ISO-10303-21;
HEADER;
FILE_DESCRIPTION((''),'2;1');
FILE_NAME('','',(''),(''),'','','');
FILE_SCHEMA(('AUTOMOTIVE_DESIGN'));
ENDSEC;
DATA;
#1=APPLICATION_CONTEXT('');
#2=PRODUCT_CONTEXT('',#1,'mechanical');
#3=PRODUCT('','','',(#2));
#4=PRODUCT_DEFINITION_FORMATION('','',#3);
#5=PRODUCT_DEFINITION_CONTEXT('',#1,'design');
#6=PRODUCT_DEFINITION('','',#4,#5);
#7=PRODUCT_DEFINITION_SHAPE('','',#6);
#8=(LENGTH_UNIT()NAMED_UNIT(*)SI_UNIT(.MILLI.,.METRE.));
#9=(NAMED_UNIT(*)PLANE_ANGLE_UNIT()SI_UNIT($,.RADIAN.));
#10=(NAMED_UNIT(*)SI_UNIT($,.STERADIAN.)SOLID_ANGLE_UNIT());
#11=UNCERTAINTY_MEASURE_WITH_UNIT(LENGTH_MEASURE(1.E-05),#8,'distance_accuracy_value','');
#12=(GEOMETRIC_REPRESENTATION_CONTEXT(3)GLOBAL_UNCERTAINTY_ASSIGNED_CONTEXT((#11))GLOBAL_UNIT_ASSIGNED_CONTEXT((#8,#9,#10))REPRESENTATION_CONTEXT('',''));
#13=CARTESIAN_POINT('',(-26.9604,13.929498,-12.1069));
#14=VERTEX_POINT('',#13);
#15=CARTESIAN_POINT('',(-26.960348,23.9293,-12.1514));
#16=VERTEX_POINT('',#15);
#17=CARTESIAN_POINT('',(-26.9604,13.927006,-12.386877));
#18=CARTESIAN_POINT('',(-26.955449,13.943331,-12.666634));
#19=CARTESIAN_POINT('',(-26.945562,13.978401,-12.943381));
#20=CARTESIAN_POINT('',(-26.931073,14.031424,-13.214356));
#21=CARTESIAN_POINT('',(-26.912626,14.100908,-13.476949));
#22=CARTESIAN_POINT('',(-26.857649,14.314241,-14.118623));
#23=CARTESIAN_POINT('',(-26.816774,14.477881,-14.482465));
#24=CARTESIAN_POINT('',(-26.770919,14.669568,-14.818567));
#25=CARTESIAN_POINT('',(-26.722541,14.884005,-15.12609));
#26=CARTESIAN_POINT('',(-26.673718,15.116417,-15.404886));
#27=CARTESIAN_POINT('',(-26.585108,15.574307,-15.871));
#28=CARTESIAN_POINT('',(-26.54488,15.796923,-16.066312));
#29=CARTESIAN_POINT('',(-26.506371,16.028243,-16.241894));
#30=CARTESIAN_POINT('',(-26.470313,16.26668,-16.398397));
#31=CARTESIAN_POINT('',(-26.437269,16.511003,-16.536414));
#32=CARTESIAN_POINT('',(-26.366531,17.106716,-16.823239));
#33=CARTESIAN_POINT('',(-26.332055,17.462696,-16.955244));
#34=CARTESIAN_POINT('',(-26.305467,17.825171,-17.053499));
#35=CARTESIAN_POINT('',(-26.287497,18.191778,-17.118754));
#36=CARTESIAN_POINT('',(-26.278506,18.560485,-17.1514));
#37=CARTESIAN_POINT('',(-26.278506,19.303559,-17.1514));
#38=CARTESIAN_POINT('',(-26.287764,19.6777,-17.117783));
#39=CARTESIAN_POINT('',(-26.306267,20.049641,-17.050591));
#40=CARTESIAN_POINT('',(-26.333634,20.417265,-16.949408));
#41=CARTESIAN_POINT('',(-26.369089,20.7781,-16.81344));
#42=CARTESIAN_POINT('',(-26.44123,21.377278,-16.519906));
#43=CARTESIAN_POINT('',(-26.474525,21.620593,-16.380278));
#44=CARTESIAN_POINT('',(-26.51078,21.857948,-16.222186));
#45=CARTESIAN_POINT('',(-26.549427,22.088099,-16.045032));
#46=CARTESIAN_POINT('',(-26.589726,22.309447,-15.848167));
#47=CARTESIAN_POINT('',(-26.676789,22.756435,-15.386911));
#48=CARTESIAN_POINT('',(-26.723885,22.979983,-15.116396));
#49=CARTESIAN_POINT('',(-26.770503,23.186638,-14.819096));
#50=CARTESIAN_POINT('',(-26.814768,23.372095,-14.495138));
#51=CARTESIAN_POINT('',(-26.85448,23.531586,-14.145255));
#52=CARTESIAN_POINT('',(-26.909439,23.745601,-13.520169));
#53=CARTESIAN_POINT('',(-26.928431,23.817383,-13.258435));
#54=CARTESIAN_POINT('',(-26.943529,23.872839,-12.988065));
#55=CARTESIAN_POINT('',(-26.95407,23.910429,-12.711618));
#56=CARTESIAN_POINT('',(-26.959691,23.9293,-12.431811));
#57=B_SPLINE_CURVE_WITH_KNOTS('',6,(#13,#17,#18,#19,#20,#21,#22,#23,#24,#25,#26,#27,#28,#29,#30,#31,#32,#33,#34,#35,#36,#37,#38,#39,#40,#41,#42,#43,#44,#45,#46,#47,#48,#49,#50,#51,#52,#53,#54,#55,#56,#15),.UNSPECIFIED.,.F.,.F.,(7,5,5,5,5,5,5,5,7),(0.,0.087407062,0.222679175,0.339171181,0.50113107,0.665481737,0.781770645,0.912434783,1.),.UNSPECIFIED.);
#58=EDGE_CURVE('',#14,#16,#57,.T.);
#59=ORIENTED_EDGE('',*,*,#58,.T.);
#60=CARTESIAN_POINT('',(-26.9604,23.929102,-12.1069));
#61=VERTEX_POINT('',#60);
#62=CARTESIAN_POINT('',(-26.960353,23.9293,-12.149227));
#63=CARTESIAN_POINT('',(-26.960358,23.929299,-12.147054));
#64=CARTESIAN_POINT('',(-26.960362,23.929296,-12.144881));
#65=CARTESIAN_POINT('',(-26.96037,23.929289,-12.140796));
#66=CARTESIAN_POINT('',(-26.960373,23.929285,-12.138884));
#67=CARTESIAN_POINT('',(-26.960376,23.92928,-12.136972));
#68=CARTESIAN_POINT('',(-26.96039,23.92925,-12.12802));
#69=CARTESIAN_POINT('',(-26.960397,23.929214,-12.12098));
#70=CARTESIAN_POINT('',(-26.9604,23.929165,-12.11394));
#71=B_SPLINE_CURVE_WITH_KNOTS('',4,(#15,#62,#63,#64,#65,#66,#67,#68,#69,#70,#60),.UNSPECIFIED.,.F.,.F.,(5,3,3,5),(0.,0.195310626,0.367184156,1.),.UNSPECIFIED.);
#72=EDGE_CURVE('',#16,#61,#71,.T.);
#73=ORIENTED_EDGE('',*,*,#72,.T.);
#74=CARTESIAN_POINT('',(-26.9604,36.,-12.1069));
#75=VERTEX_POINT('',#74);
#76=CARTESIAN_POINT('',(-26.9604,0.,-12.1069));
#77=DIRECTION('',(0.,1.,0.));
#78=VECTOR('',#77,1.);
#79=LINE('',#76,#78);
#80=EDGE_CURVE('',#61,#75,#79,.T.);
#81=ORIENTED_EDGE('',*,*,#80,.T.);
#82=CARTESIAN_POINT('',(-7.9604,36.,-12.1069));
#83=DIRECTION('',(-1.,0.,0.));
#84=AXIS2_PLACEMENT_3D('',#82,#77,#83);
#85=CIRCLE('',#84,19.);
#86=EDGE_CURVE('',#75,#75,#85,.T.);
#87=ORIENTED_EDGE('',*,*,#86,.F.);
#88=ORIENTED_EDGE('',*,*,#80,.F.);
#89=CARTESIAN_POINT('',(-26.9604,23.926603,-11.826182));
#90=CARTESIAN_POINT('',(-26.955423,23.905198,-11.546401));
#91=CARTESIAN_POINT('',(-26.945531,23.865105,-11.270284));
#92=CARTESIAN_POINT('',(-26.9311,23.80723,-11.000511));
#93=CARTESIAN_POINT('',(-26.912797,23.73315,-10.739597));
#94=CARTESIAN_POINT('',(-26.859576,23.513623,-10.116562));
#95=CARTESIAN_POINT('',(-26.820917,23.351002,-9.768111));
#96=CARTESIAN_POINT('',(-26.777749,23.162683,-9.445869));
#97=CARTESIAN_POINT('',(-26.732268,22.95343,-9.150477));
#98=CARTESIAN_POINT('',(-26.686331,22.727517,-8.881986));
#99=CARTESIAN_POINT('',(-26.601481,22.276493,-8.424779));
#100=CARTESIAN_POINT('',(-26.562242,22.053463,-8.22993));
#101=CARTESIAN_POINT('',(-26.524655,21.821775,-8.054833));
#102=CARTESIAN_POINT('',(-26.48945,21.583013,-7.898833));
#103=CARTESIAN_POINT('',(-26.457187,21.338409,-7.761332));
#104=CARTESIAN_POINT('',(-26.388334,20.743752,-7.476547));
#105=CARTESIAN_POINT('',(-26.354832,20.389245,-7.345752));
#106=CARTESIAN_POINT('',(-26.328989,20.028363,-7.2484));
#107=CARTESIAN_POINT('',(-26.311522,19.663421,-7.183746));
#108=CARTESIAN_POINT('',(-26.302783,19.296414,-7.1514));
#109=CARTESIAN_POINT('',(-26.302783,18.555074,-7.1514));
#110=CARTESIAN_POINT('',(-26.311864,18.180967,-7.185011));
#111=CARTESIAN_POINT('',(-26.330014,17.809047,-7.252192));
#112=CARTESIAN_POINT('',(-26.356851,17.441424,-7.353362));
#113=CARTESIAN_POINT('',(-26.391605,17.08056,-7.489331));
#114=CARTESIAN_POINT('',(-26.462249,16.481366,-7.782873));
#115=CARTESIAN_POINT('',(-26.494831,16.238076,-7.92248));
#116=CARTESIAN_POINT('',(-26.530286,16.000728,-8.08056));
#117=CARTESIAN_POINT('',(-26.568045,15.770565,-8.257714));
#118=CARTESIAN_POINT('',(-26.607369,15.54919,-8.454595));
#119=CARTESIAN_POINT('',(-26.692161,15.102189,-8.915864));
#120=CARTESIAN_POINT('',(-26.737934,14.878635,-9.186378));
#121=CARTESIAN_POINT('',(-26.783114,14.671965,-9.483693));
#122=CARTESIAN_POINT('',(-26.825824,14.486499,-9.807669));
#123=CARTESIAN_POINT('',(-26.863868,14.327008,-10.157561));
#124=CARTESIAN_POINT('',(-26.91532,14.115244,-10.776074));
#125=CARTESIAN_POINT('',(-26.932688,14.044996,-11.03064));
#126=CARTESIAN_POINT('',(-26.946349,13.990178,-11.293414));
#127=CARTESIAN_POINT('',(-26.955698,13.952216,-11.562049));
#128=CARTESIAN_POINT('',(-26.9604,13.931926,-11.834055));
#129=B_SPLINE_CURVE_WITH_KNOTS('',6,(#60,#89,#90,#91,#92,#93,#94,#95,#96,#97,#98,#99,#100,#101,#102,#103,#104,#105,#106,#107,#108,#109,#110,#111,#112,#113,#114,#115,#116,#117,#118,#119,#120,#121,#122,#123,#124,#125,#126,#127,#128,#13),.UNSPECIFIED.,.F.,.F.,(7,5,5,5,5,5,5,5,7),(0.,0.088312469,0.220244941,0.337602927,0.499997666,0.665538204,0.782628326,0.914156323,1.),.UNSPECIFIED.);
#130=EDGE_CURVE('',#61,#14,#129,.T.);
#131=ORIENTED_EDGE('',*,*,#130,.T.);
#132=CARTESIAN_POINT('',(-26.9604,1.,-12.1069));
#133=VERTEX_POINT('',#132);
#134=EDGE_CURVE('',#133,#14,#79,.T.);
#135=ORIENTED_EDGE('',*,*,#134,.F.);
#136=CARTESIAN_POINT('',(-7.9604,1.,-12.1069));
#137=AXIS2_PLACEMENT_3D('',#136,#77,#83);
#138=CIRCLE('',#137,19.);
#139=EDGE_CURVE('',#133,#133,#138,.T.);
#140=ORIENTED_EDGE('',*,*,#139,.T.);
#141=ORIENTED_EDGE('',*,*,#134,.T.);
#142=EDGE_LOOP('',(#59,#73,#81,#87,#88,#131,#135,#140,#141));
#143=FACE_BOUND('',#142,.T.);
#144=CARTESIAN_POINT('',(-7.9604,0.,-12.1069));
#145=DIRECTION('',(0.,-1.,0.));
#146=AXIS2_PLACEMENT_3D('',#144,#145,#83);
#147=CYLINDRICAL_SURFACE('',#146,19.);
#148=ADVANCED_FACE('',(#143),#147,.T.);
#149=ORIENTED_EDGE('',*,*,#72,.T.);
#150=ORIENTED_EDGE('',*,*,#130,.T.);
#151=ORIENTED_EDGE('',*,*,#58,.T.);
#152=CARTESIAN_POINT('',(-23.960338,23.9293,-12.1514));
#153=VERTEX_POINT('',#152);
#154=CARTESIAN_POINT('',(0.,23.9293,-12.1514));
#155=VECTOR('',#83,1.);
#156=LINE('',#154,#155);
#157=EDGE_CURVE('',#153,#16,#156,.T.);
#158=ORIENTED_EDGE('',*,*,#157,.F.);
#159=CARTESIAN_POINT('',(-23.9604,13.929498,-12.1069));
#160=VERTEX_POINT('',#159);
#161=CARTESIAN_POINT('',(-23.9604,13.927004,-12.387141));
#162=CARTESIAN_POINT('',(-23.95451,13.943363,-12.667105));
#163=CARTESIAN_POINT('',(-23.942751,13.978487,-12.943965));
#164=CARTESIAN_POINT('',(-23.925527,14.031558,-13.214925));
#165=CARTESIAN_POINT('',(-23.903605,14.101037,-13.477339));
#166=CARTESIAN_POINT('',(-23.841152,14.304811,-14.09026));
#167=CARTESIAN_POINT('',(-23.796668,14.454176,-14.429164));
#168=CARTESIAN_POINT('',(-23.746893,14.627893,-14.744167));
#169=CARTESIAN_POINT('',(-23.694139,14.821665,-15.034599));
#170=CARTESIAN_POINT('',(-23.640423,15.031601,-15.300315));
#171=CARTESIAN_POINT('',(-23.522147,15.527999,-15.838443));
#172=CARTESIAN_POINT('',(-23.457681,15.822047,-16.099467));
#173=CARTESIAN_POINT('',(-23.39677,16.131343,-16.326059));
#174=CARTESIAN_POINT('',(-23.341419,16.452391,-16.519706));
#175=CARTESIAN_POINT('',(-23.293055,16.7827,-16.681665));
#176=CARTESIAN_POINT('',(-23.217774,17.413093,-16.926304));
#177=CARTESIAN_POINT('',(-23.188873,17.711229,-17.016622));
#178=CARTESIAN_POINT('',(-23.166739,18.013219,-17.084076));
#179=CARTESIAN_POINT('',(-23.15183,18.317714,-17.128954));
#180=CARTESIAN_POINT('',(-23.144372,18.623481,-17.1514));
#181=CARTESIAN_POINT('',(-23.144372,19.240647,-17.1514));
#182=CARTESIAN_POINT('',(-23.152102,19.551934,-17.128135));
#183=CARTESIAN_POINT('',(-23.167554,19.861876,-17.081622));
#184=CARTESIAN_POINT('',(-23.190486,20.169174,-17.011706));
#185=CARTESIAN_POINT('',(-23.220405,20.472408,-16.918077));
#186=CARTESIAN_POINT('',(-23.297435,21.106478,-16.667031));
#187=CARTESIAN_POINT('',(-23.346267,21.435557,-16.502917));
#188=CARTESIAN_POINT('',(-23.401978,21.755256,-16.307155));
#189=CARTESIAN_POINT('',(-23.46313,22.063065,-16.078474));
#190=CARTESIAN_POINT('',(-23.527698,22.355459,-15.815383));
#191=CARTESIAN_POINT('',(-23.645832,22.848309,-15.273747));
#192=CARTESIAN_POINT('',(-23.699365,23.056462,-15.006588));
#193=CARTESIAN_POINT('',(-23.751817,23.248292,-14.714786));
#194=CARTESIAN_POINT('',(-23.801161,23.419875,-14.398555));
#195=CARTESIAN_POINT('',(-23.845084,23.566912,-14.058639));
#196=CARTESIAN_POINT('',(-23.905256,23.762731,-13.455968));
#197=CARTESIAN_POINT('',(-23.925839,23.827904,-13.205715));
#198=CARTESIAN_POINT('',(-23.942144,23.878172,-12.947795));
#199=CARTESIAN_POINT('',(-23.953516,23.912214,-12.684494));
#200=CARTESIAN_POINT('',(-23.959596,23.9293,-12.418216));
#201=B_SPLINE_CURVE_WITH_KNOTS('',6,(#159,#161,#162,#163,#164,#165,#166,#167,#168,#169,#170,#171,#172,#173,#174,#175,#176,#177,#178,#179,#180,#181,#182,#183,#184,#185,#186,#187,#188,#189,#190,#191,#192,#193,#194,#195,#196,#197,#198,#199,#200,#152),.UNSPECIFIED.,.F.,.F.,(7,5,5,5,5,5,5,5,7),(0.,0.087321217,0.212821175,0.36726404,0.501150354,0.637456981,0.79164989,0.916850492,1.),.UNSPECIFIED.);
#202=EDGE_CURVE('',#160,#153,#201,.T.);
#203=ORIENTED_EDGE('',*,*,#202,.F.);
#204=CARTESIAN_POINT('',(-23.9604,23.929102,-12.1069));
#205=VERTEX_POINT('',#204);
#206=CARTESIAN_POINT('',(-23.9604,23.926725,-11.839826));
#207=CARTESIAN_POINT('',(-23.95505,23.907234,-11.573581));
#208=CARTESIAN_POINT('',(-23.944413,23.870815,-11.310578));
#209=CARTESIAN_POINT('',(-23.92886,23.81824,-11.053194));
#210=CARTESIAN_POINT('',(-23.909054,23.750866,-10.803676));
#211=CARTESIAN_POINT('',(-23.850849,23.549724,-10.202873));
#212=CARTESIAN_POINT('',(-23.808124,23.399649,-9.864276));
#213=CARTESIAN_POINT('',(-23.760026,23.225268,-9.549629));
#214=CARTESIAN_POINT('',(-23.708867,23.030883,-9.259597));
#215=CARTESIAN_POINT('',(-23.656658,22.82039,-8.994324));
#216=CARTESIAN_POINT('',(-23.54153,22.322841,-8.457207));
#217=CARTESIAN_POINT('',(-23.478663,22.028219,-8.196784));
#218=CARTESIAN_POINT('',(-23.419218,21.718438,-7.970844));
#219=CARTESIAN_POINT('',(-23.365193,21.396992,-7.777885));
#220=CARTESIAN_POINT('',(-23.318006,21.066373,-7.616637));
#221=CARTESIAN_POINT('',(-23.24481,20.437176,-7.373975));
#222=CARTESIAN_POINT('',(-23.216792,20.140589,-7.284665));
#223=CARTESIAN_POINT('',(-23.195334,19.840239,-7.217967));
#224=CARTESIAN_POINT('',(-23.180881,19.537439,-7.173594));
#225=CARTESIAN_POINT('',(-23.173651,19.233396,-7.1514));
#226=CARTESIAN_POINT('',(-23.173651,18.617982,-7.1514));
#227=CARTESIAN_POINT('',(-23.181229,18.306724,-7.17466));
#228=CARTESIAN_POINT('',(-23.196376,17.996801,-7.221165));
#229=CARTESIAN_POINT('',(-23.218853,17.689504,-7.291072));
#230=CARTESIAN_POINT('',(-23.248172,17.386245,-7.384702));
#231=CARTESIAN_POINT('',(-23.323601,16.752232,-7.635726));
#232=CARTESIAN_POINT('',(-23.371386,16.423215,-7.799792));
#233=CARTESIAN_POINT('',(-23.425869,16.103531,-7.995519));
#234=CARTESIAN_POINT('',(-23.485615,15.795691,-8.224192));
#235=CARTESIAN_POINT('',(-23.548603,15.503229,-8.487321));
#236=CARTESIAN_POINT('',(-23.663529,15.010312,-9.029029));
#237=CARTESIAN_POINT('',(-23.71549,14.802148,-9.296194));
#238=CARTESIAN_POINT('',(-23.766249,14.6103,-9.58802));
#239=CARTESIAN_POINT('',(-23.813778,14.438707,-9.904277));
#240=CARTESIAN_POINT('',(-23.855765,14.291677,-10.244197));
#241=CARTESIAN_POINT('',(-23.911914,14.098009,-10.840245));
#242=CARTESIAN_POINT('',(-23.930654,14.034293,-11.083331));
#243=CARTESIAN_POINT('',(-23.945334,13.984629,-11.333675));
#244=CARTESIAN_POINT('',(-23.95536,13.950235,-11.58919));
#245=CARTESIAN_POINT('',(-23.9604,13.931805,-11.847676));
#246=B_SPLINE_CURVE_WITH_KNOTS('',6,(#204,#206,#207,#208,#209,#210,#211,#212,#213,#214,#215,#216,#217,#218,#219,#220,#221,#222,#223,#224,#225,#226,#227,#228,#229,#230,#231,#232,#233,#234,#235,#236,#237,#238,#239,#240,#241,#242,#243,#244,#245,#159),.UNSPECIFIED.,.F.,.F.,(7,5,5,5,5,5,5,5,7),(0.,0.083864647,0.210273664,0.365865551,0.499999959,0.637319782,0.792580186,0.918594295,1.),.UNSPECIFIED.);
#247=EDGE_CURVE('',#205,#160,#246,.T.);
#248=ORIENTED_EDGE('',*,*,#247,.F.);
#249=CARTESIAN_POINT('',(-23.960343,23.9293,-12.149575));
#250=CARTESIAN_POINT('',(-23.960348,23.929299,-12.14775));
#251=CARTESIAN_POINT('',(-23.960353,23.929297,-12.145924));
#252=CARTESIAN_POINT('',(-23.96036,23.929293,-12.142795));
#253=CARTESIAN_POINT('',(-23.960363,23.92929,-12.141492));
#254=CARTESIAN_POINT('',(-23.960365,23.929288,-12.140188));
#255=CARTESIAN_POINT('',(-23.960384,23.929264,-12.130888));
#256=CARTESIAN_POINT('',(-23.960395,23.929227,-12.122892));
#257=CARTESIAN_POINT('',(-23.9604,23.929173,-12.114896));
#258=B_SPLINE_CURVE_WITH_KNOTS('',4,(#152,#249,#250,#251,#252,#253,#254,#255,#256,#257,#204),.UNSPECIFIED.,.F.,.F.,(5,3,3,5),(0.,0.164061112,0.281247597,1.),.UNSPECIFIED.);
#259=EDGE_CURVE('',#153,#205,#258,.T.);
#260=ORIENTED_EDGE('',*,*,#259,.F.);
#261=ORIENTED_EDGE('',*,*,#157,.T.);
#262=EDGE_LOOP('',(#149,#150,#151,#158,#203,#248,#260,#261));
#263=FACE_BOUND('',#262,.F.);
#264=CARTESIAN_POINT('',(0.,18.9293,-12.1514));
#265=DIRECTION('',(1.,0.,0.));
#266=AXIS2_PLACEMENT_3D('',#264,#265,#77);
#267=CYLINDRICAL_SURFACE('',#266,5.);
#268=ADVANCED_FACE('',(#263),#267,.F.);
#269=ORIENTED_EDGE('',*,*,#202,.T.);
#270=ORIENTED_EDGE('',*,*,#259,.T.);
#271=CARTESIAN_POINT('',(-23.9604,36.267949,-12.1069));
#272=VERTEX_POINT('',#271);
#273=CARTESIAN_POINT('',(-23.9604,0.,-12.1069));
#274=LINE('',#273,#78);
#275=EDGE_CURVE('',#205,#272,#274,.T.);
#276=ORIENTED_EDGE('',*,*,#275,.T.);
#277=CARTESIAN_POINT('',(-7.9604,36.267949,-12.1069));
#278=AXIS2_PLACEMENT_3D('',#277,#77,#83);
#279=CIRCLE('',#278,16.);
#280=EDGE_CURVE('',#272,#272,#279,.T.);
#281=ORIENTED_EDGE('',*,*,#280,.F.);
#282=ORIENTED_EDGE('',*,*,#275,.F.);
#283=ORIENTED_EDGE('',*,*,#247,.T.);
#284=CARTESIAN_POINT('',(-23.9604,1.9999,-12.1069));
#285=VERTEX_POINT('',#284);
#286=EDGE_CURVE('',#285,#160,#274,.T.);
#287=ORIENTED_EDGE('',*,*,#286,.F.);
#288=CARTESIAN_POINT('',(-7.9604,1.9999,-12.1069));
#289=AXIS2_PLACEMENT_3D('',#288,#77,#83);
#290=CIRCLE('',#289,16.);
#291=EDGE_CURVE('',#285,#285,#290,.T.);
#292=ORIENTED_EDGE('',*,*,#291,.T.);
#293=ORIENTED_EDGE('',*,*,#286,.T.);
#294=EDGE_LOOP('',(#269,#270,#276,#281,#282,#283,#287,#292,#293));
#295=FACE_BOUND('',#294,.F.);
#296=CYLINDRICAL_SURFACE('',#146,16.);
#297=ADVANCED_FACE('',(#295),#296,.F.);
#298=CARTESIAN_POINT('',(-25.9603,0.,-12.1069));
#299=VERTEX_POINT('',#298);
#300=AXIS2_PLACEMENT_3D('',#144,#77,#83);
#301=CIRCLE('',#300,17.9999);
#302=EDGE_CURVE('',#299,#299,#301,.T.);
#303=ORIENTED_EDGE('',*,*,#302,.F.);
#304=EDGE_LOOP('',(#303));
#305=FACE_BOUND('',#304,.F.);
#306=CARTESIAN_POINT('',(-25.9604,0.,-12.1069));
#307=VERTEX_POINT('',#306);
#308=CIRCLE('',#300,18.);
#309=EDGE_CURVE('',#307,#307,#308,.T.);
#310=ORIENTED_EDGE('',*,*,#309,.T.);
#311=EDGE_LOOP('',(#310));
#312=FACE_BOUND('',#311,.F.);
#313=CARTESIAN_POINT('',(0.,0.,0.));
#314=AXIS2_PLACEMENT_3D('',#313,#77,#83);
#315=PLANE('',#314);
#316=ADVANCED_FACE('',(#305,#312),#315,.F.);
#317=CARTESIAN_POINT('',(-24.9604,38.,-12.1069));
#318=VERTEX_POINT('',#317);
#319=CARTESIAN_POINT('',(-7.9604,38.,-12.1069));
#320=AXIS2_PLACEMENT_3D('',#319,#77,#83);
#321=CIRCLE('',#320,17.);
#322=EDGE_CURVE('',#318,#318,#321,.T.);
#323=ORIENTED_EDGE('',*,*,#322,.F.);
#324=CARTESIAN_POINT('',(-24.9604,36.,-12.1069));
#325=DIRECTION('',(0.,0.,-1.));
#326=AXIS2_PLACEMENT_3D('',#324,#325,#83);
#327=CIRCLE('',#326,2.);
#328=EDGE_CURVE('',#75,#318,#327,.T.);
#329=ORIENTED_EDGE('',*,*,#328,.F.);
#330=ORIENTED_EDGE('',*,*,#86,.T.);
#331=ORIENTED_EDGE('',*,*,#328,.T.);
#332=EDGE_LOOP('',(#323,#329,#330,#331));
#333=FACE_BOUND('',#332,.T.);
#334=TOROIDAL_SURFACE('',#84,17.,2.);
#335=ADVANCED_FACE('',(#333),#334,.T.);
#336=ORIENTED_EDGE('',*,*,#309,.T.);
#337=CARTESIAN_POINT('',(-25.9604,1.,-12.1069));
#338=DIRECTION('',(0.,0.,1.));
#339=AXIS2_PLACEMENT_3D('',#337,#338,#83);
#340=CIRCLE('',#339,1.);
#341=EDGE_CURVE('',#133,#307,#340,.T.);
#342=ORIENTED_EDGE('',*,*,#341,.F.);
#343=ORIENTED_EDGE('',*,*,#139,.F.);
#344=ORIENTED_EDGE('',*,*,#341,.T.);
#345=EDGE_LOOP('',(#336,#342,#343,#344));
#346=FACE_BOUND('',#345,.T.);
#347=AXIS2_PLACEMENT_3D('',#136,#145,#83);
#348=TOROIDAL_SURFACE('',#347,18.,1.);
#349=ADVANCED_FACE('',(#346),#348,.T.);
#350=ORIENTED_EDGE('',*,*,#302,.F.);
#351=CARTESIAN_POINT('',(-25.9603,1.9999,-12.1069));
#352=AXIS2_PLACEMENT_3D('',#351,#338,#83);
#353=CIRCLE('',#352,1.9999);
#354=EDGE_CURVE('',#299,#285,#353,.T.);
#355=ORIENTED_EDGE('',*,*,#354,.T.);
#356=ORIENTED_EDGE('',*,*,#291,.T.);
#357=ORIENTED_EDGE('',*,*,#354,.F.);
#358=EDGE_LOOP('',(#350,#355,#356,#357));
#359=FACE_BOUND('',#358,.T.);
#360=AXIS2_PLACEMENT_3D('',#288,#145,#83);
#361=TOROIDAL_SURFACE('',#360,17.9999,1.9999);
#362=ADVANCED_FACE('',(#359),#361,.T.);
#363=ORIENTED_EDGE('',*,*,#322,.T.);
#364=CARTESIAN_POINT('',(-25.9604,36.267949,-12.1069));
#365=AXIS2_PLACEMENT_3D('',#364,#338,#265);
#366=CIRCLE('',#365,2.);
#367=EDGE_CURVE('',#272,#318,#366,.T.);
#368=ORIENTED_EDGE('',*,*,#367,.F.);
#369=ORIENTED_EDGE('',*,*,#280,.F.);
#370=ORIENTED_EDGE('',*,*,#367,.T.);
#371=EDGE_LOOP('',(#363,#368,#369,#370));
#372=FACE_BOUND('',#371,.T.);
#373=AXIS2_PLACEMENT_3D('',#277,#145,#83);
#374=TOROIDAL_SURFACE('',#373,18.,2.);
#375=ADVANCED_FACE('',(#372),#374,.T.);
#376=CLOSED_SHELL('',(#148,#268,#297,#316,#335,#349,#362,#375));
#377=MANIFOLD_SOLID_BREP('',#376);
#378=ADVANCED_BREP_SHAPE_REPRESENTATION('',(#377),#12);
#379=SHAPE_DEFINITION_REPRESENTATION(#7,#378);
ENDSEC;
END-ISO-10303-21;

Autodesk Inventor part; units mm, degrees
ref_plane "YZ Plane" through (0, 0, 0) normal (1, 0, 0) x (0, 1, 0)
ref_plane "XZ Plane" through (0, 0, 0) normal (0, 1, 0) x (-1, 0, 0)
ref_plane "XY Plane" through (0, 0, 0) normal (0, 0, 1) x (1, 0, 0)
sketch "Sketch1" plane through (0, 0, 0) normal (0, 1, 0) x (-1, 0, 0)
  circle A0 centre (7.9604, -12.1069) radius 19
  circle A1 centre (7.9604, -12.1069) radius 16
  point P0 (0, 0)
  dimension "d0" = 38
  dimension "d1" = 32
extrude "Extrusion1" add sketch "Sketch1" along normal blind 38
fillet "Fillet1" radius 2 2 edges at (11.0396, 38, -12.1069) (8.0396, 38, -12.1069)
fillet "Fillet2" radius 1 1 edges at (11.0396, 0, -12.1069)
fillet "Fillet3" radius 2 1 edges at (8.0396, 0, -12.1069)
sketch "Sketch2" plane through (0, 0, 0) normal (1, 0, 0) x (0, 1, 0)
  line L0 (39.783, 8.7002) -> (-1.9245, -33.003)
  circle A0 centre (18.9293, -12.1514) radius 5
  point P0 (0, 0)
  dimension "d7" = 10
extrude "Extrusion2" cut sketch "Sketch2" against normal blind 38
properties part number "Bucha"
